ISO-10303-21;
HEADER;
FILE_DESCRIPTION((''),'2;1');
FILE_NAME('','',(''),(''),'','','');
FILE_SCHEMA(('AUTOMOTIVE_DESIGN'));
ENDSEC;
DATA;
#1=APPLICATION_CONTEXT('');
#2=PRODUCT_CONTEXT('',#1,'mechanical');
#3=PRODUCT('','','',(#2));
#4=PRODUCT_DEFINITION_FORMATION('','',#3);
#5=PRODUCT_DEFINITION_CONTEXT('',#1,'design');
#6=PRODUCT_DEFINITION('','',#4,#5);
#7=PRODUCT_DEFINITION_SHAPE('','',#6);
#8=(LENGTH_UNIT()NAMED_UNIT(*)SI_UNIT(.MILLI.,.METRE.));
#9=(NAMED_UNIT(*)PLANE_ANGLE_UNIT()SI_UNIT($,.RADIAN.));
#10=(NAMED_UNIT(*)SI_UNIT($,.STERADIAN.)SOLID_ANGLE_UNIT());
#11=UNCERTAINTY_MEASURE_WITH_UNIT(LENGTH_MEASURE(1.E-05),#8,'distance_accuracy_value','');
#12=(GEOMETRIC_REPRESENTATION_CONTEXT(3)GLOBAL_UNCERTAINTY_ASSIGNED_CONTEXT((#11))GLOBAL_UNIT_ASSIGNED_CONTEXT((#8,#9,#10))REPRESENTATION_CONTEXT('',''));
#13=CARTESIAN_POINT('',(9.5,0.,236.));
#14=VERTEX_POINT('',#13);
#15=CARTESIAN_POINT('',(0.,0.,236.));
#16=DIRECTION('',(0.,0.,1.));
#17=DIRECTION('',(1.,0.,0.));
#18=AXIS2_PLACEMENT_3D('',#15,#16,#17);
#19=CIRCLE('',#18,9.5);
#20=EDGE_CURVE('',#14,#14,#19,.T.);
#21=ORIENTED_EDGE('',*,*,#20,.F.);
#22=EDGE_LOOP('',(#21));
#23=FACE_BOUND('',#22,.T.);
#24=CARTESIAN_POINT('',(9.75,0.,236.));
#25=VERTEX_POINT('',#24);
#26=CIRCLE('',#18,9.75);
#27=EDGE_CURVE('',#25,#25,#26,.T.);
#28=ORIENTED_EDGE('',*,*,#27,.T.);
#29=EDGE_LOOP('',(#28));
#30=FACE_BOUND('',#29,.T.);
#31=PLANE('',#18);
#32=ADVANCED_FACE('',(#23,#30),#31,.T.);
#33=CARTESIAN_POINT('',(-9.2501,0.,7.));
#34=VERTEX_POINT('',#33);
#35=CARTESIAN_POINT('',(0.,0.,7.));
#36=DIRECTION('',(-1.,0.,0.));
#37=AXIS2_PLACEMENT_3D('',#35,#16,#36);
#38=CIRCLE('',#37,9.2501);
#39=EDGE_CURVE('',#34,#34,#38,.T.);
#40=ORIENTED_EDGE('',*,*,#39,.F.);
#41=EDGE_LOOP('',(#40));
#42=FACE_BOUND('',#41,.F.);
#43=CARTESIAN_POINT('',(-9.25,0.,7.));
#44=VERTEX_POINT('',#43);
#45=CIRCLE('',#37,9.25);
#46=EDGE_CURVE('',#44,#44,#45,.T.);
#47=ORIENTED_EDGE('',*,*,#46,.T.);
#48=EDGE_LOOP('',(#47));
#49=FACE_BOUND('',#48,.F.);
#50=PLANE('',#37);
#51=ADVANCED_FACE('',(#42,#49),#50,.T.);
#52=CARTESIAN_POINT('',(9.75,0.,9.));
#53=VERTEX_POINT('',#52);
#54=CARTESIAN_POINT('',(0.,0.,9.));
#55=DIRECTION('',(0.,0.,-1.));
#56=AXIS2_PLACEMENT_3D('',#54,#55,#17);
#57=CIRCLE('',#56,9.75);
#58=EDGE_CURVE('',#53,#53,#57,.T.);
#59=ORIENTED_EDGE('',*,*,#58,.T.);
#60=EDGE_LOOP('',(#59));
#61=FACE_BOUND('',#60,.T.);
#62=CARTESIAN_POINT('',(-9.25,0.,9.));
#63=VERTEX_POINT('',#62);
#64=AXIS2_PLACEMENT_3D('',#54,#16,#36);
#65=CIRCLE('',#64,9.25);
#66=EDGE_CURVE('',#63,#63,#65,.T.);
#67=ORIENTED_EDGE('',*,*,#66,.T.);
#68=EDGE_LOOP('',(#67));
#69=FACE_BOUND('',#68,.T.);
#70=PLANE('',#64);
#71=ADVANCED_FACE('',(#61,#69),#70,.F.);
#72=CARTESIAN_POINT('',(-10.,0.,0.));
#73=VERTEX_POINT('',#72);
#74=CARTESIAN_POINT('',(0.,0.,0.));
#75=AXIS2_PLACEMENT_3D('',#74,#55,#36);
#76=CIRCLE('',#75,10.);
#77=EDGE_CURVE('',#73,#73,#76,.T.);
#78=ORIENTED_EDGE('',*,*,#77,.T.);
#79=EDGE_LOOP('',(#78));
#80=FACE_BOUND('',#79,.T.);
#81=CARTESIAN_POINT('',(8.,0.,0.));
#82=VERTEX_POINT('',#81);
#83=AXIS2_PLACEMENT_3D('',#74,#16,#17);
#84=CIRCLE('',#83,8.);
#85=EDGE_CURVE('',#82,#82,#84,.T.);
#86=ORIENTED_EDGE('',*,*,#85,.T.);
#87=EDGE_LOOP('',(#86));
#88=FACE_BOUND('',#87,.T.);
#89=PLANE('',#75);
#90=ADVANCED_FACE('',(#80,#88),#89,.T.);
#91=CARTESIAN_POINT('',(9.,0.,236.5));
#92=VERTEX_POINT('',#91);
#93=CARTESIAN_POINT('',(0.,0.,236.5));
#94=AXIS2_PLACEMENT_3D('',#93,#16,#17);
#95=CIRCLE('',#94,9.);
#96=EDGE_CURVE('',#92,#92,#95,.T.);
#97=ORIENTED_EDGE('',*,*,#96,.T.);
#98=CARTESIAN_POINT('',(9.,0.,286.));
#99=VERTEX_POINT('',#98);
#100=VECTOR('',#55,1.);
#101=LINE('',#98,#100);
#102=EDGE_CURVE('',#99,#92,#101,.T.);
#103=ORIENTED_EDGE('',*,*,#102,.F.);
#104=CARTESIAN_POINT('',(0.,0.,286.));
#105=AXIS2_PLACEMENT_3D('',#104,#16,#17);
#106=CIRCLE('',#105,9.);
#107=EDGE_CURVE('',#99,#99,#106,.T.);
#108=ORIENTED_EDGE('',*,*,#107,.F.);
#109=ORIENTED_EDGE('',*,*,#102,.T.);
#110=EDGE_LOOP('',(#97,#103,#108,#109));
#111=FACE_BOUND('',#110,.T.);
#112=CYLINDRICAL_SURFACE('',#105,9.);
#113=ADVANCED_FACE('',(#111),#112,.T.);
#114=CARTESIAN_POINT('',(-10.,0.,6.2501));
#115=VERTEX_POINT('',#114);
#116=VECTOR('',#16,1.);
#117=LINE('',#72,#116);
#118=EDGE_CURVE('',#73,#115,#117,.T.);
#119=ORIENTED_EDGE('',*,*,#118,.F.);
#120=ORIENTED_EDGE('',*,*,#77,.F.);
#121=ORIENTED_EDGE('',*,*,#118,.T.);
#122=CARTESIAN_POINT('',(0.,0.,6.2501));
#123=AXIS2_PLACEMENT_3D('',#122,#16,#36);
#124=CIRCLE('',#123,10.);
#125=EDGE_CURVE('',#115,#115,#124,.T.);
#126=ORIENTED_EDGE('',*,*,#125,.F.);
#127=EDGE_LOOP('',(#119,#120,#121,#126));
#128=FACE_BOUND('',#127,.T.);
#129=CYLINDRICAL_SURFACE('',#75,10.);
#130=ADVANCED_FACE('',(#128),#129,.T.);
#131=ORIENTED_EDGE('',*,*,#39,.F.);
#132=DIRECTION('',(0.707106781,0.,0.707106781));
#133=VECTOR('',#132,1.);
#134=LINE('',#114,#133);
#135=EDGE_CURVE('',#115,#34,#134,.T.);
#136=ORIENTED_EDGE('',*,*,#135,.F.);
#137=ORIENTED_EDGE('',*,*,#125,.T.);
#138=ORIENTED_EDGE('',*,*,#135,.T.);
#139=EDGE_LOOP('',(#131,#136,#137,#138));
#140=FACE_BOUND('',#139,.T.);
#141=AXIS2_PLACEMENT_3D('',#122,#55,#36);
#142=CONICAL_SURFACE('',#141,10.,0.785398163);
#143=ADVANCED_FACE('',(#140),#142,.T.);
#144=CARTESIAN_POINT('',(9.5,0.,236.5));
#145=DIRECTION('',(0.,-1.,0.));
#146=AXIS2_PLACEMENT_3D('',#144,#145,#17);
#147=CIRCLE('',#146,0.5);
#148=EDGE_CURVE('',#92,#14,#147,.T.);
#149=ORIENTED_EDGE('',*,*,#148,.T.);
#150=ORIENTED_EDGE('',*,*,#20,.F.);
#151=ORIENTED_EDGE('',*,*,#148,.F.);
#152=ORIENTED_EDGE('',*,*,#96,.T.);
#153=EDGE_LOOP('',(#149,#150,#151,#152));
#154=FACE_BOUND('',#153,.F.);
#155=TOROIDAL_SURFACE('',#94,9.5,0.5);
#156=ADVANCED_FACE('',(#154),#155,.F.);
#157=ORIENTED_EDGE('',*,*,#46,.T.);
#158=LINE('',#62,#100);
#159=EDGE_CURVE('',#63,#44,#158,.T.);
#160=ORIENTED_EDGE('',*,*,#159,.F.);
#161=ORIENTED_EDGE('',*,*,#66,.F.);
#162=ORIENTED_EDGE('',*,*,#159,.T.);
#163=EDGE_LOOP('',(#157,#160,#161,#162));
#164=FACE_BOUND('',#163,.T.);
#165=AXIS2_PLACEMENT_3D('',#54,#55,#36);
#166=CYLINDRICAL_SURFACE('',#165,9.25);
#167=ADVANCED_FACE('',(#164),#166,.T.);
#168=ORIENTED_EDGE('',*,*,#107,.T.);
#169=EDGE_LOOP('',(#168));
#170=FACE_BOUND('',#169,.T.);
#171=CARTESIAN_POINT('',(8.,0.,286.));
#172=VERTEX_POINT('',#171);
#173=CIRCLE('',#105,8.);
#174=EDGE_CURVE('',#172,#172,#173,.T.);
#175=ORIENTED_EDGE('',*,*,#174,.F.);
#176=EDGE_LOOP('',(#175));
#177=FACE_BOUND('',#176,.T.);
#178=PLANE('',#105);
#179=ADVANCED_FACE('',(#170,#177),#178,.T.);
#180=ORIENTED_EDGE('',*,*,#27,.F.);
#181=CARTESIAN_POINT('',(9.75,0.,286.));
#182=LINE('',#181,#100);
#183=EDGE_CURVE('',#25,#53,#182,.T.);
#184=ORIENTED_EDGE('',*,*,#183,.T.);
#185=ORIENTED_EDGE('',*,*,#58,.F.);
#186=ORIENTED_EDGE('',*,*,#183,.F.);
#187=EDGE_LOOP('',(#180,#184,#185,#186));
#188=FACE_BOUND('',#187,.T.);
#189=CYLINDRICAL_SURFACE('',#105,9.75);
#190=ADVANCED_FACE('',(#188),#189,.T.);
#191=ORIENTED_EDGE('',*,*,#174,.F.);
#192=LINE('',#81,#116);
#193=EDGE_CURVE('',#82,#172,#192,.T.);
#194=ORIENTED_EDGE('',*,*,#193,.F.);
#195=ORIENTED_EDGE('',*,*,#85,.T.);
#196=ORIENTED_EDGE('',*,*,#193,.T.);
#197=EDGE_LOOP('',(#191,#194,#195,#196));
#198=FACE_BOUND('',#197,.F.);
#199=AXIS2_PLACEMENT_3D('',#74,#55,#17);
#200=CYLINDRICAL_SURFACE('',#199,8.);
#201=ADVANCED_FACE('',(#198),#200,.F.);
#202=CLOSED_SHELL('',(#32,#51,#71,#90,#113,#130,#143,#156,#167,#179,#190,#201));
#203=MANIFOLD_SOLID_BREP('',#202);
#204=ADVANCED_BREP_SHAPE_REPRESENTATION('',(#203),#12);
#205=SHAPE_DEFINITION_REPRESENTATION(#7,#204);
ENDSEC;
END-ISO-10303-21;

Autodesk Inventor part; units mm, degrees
ref_plane "YZ Plane" through (0, 0, 0) normal (1, 0, 0) x (0, 1, 0)
ref_plane "XZ Plane" through (0, 0, 0) normal (0, 1, 0) x (-1, 0, 0)
ref_plane "XY Plane" through (0, 0, 0) normal (0, 0, 1) x (1, 0, 0)
sketch "Skizze1" plane through (0, 0, 0) normal (0, 0, 1) x (1, 0, 0)
  circle A0 centre (0, 0) radius 8
  circle A1 centre (0, 0) radius 10.05
  dimension "d0" = 20.1
  dimension "d1" = 2.05
extrude "Extrusion1" add sketch "Skizze1" along normal blind 286
sketch "Skizze2" plane through (0, 0, 286) normal (0, 0, 1) x (1, 0, 0)
  circle A0 centre (0, 0) radius 10.05 projected
  circle A1 centre (0, 0) radius 9.75
  dimension "d4" = 19.5
extrude "Extrusion2" cut sketch "Skizze2" against normal through all
sketch "Skizze3" plane through (0, 0, 0) normal (0, 0, -1) x (-1, 0, 0)
  circle A0 centre (0, 0) radius 9.75 projected
  circle A1 centre (0, 0) radius 8 projected
  circle A2 centre (0, 0) radius 10
  dimension "d7" = 20
extrude "Extrusion3" add sketch "Skizze3" against normal blind 9 contours A2
sketch "Skizze4" plane through (0, 0, 286) normal (0, 0, 1) x (1, 0, 0)
  circle A0 centre (0, 0) radius 9.75 projected
  circle A1 centre (0, 0) radius 8 projected
  circle A2 centre (0, 0) radius 9
  dimension "d10" = 18
extrude "Extrusion4" cut sketch "Skizze4" against normal blind 50 contours A0
sketch "Skizze5" plane through (0, 0, 0) normal (0, 1, 0) x (-1, 0, 0)
  line L0 (-10, 9) -> (10, 9) projected
  line L1 (10, 0) -> (-10, 0) projected
  line L2 (-9.75, 236) -> (9.75, 236) projected
  line L3 (10, 0) -> (10, 9) projected
  line L4 (8, 0) -> (8, 286) projected
  line L5 (9.75, 236) -> (9.75, 9) projected
  line L6 (10, 9) -> (9.25, 9)
  line L7 (9.25, 9) -> (9.25, 7)
  line L8 (9.25, 7) -> (10, 7)
  line L9 (10, 7) -> (10, 9)
  line L10 (14, 0) -> (-14, 0) projected
  line L11 (0, -57.2) -> (0, 343.2) projected
  point P0 (0, 0)
  point P1 (9.9, 9)
  point P2 (-9.9, 9)
  point P3 (9.75, 9)
  dimension "d13" = 2
  dimension "d14" = 18.5
revolve "Umdrehung1" cut sketch "Skizze5" angle 360 about axis through (0, 0, -10) along (0, 0, 1) contours L0 L3 L8 L7
chamfer "Fase1" distance 0.75 angle 45 1 edges at (10, 0, 7)
thread "Gewinde2" size "M20x1" class "6g" standard "ANSI Metric M Profile" full length
fillet "Rundung1" radius 0.5 1 edges at (-9, 0, 236)
properties part number "13_0204_024"
